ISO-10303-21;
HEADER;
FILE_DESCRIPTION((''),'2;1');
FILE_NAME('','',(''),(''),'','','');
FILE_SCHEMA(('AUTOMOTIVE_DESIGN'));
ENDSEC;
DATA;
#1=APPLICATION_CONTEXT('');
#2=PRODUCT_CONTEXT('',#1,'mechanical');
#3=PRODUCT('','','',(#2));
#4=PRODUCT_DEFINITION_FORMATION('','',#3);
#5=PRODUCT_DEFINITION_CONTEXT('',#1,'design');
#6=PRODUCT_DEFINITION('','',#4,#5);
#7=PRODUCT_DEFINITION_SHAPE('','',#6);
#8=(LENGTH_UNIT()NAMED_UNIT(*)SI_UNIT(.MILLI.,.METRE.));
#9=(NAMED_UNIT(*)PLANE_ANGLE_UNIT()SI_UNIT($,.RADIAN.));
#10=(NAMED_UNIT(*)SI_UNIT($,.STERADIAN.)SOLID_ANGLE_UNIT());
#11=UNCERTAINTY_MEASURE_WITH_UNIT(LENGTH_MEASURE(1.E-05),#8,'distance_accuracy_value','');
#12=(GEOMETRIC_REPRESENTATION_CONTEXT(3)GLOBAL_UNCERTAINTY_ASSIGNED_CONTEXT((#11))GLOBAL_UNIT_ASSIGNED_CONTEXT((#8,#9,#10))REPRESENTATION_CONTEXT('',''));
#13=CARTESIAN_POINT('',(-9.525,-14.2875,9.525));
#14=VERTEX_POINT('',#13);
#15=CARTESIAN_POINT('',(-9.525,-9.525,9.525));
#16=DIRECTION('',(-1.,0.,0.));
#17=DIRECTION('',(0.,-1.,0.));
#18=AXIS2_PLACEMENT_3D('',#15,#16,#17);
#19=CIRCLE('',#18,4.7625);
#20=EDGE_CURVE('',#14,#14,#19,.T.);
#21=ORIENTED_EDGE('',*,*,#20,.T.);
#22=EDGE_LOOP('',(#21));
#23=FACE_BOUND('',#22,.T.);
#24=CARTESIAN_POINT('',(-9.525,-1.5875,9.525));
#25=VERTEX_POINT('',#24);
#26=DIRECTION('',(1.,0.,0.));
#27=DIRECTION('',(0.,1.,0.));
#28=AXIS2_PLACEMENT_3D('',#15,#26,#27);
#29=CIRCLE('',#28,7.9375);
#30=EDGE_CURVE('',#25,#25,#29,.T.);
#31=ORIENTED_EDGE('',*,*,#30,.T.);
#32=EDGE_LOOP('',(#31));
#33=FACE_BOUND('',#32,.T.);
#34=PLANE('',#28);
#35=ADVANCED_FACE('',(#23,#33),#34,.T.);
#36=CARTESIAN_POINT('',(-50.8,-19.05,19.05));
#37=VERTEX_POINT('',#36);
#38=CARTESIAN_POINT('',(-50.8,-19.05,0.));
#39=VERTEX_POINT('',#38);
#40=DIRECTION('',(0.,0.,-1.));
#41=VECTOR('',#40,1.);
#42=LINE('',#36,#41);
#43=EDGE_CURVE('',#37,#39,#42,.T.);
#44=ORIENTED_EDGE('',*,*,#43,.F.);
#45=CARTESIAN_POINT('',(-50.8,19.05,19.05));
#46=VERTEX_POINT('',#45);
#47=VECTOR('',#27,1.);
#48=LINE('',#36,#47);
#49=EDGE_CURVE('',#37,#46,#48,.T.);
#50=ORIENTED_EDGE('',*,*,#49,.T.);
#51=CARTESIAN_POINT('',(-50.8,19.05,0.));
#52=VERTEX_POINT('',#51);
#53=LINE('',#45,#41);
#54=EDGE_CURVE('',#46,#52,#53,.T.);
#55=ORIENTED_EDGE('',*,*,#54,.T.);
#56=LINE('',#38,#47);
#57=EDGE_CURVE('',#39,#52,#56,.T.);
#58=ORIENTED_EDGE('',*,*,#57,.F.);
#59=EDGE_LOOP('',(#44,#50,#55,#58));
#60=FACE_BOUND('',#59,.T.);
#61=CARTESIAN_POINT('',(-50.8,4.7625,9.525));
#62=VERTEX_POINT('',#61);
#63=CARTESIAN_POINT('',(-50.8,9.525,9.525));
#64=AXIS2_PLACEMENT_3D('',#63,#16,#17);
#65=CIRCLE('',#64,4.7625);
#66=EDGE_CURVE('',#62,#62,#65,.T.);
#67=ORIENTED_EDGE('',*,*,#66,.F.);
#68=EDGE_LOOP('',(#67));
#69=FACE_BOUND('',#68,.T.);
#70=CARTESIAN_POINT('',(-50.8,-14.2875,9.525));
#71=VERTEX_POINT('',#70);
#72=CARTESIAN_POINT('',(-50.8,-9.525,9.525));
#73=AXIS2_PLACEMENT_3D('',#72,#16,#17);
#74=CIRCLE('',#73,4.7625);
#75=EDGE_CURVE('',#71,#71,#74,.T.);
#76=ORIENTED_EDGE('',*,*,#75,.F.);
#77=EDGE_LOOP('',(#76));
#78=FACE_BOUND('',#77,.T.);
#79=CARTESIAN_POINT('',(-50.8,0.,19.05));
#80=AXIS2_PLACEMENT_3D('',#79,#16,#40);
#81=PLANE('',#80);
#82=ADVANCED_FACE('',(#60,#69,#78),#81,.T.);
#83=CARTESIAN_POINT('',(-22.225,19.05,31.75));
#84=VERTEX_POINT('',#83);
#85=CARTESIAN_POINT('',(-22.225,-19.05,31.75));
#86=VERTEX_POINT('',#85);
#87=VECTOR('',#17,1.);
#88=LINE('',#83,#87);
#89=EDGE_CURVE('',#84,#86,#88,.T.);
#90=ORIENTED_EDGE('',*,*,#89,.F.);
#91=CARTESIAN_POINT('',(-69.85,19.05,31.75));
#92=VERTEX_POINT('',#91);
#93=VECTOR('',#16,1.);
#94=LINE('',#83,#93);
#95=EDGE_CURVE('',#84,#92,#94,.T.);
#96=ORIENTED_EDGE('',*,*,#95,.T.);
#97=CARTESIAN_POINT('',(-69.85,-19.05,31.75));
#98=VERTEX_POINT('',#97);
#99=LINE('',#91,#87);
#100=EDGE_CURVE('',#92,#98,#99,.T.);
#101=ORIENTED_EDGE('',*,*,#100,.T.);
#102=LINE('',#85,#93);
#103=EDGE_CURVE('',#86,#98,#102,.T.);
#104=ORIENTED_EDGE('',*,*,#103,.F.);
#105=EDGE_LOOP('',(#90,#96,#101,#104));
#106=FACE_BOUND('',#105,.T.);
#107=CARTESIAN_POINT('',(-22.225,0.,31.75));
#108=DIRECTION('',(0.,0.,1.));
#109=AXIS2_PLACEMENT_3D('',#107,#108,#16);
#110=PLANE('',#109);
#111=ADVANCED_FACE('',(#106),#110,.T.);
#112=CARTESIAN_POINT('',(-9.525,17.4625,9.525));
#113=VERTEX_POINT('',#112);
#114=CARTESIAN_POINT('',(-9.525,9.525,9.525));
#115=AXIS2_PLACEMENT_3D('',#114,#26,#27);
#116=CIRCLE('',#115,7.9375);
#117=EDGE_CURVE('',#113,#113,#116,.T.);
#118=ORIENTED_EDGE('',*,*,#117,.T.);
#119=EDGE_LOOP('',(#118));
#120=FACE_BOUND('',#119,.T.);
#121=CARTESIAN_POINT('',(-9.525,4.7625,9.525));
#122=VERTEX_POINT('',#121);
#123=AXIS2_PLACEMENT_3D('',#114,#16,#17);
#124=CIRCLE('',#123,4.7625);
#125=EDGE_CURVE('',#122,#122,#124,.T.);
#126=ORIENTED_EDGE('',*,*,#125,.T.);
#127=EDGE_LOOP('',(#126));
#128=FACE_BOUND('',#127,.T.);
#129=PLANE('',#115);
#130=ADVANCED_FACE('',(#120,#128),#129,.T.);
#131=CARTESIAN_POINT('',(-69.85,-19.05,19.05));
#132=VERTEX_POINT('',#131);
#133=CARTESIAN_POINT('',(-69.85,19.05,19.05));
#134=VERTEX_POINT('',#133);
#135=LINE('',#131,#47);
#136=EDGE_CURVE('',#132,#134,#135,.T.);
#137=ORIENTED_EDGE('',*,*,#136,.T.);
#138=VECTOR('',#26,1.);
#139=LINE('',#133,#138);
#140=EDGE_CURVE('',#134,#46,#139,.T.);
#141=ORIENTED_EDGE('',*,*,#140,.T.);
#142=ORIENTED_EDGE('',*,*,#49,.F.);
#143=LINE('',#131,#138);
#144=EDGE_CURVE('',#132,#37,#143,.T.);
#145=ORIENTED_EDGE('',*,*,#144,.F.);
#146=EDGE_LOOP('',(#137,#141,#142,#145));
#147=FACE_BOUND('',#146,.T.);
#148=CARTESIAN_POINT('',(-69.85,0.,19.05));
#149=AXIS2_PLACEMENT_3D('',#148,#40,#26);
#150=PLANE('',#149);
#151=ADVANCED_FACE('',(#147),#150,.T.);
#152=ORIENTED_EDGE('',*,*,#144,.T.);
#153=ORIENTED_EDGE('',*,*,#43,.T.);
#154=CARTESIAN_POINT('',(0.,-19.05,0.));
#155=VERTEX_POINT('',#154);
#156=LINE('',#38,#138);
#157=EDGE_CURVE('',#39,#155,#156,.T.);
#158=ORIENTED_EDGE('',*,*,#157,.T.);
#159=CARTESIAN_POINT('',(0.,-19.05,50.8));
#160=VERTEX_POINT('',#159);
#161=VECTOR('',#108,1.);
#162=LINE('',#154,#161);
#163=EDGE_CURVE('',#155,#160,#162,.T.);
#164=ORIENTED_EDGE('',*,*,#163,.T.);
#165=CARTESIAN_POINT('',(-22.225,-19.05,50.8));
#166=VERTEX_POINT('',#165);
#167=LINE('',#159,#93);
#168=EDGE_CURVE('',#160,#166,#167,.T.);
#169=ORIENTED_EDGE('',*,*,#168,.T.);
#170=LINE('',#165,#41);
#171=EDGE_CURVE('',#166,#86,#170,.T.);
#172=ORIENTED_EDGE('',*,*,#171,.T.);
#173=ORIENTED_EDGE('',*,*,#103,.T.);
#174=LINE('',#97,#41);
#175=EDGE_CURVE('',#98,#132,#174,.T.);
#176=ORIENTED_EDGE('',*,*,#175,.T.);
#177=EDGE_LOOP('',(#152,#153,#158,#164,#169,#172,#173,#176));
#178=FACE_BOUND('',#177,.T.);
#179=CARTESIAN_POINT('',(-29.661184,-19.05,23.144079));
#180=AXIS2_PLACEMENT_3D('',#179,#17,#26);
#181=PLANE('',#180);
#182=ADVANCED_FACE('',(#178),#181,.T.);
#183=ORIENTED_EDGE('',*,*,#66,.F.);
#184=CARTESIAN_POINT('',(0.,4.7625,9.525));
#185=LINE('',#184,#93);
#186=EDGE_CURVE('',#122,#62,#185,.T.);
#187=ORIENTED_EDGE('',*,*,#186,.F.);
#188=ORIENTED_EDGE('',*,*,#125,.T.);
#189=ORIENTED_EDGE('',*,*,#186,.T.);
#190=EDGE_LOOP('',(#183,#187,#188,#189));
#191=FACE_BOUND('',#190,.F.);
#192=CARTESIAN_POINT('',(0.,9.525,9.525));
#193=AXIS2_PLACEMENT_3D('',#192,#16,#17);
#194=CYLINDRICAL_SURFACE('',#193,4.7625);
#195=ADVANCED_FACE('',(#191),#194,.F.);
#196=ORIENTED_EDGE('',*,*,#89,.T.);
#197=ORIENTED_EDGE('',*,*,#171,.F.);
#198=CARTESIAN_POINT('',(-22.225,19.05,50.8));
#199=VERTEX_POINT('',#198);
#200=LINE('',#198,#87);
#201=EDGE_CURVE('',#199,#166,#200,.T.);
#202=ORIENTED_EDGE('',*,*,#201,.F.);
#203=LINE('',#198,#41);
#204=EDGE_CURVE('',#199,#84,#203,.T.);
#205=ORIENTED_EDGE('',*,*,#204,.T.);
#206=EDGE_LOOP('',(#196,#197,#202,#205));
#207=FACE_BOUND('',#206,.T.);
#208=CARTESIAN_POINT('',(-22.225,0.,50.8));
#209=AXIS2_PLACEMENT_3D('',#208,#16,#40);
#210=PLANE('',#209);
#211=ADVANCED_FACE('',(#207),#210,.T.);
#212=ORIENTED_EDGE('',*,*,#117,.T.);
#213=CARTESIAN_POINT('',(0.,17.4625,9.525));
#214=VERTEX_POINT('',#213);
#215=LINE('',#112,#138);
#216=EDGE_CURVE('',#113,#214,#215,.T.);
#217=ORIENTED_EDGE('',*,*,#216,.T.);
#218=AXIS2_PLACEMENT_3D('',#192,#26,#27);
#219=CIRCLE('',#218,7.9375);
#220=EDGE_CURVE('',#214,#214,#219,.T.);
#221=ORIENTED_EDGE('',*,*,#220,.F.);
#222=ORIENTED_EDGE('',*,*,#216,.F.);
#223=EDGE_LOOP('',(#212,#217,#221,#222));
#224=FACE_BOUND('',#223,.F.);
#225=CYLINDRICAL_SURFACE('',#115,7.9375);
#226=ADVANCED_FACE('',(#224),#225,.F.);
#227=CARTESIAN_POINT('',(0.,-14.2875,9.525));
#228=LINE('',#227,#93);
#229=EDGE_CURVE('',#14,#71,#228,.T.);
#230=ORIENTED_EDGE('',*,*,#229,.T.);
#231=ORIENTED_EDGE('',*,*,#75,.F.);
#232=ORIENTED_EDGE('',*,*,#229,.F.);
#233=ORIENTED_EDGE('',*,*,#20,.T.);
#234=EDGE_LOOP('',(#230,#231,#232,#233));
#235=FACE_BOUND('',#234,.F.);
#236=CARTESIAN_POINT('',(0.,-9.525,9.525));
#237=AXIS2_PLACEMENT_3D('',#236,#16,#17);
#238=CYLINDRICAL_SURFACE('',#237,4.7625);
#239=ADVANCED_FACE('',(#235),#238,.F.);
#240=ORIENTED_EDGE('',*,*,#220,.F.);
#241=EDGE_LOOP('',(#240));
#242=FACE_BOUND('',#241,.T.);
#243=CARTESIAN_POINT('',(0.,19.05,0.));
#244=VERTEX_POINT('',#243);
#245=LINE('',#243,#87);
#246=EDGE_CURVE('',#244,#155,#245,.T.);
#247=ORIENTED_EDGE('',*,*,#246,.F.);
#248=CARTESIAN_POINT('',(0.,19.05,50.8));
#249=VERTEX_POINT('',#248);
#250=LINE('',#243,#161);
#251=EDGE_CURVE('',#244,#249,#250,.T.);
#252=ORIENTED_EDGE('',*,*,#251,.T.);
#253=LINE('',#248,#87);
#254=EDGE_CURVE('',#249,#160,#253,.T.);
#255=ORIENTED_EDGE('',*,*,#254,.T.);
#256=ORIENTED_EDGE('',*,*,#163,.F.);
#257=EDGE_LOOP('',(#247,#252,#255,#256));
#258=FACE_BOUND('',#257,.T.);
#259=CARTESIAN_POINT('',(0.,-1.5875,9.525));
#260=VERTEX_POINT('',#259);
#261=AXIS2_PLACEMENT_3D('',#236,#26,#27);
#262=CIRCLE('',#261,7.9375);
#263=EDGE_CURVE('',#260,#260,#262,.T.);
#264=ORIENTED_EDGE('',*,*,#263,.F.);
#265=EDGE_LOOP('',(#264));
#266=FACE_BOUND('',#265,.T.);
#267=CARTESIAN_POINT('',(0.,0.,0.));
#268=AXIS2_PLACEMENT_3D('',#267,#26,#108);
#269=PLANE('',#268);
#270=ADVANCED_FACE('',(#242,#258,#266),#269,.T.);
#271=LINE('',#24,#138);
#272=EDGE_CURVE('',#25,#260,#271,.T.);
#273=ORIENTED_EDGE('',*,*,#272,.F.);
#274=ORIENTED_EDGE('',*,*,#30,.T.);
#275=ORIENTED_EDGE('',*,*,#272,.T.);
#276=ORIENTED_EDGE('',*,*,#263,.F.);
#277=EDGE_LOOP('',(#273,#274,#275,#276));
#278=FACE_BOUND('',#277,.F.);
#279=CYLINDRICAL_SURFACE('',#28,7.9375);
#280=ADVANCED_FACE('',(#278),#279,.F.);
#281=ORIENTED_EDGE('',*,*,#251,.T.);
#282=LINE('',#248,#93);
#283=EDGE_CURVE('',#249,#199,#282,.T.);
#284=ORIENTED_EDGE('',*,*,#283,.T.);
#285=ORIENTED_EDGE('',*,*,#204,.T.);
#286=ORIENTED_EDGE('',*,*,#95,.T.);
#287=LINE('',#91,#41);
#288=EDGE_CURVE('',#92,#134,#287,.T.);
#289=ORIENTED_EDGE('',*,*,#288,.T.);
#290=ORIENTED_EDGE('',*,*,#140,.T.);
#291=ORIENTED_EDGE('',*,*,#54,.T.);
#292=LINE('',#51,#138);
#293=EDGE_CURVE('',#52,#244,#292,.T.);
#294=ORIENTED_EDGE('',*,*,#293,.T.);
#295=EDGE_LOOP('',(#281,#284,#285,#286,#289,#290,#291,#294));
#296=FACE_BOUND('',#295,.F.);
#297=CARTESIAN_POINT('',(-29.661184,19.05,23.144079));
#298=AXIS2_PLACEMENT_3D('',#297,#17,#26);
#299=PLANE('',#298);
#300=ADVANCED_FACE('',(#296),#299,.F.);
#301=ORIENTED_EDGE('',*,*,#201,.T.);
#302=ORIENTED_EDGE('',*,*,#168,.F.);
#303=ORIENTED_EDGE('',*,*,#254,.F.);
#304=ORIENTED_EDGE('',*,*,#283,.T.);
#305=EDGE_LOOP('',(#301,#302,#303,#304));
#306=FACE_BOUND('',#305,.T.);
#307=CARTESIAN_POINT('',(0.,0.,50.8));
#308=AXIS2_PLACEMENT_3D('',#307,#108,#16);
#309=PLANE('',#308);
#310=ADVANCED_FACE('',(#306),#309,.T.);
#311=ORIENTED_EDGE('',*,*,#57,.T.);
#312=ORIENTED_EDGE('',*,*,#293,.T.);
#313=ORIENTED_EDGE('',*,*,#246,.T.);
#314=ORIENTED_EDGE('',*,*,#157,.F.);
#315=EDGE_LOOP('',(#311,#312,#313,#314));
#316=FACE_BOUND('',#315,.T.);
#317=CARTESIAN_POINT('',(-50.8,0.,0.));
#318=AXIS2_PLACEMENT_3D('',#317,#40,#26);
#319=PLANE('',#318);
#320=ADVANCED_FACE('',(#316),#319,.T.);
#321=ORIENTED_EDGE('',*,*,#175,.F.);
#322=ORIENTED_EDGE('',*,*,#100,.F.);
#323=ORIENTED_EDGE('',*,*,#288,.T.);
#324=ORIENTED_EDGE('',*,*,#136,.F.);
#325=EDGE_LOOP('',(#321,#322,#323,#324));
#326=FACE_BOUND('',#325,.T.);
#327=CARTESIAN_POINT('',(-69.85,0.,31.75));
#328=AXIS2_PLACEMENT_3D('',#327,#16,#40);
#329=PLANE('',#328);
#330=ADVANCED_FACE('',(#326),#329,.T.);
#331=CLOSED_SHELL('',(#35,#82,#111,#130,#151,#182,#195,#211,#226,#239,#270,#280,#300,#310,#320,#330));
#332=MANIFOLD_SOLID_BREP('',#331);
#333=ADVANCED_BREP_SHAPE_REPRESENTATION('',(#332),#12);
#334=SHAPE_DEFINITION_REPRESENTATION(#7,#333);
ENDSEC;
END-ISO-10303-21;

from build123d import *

# Parameters (mm, degrees)
F1_DEPTH       = 19.05
F3_D           = 9.525
F3_CBORE_D     = 15.875
F3_CBORE_DEPTH = 9.525


# Not quite as in the source:
# - a length typed as a fraction of an inch, garbled in the dataset ("3 / 203.2 mm" for 3/8 in), is restored


with BuildPart() as f1:
    # F0 (on Front) → F1 (new body, symmetric)
    with BuildSketch(Plane.XZ):
        Polygon((-50.8, 0), (0, 0), (0, 50.8), (-22.225, 50.8), (-22.225, 31.75), (-69.85, 31.75), (-69.85, 19.05), (-50.8, 19.05), align=None)
    extrude(amount=F1_DEPTH, both=True)

    # F3 (through all)
    with Locations(Plane.YZ):
        with Locations((-9.525, 9.525), (9.525, 9.525)):
            CounterBoreHole(F3_D / 2, F3_CBORE_D / 2, F3_CBORE_DEPTH)


solid = f1.part
